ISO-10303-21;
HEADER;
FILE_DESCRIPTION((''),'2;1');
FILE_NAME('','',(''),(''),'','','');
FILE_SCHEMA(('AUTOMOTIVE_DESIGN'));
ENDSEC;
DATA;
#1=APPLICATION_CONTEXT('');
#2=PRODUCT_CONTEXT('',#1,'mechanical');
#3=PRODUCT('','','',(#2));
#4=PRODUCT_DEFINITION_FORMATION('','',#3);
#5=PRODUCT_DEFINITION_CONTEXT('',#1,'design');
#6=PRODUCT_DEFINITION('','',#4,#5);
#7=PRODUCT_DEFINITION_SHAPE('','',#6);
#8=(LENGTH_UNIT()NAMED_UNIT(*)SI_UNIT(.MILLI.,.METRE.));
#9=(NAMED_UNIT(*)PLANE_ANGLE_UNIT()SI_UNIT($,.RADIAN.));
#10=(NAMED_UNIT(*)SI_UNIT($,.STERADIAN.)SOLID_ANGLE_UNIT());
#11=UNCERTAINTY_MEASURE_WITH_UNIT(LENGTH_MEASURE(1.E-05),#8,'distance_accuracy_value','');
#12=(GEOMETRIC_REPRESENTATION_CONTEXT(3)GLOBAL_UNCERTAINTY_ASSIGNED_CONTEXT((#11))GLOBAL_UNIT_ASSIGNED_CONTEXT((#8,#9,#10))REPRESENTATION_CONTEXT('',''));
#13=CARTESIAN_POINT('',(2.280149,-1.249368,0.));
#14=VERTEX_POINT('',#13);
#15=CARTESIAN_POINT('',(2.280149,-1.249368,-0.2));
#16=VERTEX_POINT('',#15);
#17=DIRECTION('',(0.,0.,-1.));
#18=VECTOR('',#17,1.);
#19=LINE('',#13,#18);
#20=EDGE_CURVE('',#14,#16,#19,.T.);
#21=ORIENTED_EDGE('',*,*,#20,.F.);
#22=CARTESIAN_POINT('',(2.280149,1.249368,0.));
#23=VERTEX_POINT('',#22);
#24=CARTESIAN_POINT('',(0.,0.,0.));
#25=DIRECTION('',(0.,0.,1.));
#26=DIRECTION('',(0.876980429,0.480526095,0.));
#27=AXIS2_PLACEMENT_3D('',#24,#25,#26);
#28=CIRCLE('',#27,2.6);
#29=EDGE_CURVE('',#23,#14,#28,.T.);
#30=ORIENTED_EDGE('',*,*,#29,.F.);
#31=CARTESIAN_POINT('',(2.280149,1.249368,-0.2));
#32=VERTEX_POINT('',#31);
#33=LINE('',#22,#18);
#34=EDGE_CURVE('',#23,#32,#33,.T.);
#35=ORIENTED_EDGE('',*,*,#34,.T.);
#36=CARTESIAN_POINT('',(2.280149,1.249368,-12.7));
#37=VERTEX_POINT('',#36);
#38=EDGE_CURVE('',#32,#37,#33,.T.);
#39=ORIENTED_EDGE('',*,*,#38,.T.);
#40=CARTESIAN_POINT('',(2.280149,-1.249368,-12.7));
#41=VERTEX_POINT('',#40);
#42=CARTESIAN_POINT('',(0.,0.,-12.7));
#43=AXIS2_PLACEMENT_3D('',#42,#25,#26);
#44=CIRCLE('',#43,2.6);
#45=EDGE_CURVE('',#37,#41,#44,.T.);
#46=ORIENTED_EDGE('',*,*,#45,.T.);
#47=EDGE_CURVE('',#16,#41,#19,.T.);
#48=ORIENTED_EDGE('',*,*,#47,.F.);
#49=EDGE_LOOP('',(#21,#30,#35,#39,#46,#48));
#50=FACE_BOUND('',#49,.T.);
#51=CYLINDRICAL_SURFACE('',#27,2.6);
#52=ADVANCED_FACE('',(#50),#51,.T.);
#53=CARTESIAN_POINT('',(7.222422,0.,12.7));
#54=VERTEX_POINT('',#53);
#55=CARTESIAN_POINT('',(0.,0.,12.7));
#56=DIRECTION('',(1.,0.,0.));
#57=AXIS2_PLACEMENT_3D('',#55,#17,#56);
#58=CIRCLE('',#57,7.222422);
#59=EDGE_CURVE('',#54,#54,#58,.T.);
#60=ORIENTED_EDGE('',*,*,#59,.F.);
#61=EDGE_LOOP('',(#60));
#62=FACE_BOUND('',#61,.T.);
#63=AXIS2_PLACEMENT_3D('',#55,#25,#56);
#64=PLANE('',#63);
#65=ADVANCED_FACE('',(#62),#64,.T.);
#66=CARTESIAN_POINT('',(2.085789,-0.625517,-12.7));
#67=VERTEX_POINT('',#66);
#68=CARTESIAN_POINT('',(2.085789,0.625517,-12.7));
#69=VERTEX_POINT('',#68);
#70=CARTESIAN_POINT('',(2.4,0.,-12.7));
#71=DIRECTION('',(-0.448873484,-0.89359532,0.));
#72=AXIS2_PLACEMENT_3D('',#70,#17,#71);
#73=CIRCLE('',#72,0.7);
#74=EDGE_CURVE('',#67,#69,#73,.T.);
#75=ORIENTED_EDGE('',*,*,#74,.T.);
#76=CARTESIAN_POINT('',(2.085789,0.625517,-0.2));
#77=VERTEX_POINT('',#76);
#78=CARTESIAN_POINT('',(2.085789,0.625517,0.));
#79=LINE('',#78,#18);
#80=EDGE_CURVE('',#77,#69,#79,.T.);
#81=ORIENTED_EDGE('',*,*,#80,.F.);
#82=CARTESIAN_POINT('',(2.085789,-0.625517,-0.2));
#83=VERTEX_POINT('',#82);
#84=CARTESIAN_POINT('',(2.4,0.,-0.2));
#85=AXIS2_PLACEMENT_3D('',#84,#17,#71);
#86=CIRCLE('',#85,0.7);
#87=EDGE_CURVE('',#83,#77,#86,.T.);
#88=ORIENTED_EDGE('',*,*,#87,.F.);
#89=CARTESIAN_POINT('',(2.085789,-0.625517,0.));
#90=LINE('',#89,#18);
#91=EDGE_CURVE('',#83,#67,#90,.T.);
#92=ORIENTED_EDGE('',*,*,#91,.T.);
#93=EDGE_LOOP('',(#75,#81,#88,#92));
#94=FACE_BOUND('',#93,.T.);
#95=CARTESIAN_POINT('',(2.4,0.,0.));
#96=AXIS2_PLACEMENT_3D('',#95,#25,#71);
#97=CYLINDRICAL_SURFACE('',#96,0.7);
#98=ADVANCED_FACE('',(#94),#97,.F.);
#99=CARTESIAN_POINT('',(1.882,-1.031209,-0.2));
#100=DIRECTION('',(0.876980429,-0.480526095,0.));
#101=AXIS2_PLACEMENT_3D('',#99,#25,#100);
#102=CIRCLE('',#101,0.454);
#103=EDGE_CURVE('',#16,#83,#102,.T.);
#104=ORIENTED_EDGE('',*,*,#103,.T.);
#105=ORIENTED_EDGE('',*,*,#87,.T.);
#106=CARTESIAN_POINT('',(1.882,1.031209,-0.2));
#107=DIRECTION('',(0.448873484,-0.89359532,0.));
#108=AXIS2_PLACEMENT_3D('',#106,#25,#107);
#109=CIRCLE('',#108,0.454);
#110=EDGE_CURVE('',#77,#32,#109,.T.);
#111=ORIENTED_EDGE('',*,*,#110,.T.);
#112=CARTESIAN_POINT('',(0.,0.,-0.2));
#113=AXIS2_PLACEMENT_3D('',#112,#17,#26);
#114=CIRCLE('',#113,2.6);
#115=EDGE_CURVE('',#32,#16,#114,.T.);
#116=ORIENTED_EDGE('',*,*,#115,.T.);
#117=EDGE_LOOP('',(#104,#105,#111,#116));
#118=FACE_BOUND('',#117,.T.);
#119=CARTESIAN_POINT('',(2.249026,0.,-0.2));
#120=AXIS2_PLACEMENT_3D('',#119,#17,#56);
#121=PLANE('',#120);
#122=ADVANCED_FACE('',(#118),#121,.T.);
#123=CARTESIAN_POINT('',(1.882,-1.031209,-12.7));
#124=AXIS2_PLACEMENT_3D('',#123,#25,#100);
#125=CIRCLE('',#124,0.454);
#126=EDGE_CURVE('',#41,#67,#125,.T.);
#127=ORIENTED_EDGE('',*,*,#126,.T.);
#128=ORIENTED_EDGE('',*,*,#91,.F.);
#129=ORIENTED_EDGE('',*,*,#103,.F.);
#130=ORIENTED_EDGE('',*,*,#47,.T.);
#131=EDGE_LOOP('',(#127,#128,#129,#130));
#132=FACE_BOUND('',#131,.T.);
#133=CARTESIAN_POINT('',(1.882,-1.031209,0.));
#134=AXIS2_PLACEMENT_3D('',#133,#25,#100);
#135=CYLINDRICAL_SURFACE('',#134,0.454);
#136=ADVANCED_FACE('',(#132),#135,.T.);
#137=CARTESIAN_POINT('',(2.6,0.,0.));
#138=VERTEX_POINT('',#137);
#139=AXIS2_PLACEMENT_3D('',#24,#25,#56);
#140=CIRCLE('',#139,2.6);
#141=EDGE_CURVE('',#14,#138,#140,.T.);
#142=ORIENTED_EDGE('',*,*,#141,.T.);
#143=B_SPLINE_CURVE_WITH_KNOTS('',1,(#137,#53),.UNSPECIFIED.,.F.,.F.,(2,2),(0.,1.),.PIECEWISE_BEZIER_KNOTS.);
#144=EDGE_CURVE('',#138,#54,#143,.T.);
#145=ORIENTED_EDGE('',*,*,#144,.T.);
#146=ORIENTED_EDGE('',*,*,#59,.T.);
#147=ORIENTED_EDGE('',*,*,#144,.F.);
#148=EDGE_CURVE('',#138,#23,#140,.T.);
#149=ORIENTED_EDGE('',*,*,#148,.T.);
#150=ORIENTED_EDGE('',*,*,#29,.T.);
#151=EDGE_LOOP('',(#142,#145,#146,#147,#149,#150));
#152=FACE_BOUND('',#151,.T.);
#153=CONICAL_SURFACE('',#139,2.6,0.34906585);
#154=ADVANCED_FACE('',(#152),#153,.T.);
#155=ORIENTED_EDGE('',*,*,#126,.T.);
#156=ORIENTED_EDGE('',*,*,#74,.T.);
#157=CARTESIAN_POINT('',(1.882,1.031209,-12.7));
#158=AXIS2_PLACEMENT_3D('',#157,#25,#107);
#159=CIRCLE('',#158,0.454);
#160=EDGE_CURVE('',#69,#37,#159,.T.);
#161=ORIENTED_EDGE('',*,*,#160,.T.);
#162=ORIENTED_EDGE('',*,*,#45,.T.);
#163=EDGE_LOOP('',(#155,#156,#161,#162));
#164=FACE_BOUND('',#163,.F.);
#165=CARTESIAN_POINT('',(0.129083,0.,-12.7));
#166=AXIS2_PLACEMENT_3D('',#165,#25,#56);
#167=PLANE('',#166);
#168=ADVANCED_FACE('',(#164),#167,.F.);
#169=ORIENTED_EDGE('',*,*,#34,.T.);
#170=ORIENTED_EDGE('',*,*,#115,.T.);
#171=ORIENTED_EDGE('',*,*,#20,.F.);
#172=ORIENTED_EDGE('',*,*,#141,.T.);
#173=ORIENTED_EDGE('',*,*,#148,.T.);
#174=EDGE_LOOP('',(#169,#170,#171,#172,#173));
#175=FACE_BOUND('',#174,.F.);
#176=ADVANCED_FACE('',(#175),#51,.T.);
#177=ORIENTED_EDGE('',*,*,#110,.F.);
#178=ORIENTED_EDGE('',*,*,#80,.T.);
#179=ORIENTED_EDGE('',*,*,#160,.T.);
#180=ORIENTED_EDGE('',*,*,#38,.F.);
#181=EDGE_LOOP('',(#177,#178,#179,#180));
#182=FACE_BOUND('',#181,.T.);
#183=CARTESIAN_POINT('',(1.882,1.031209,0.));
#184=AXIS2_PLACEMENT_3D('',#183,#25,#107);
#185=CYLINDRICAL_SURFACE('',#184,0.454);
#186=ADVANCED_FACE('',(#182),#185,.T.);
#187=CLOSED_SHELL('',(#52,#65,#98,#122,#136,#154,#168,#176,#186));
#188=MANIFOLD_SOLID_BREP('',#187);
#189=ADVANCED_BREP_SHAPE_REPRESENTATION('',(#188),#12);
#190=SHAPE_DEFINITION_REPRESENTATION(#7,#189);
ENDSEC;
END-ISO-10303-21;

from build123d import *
from build123d import SkipClean  # not in build123d's __all__

# Parameters (mm, degrees)
F1_DEPTH = 12.7
F2_R     = 2.6
F3_DEPTH = 12.7
F3_TAPER = -20
F6_DEPTH = 0.2


with BuildPart() as f1:
    # F0 (on Top) → F1 (new body)
    with BuildSketch(Plane.XY):
        with BuildLine():
            ThreePointArc((2.0857885615, 0.6255167239), (2.315451032, 0.8961675136), (2.2801491146, 1.2493678462))
            ThreePointArc((2.2801491146, 1.2493678462), (-2.6, 0), (2.2801491146, -1.2493678462))
            ThreePointArc((2.2801491146, -1.2493678462), (2.315451032, -0.8961675136), (2.0857885615, -0.6255167239))
            ThreePointArc((2.0857885615, -0.6255167239), (1.7, 0), (2.0857885615, 0.6255167239))
        make_face()
    extrude(amount=-F1_DEPTH)

    # F2 (on Top) → F3 (join)
    with BuildSketch(Plane.XY):
        Circle(F2_R)
    extrude(amount=F3_DEPTH, taper=F3_TAPER)

    # F5 (on face) → F6 (join)
    with BuildSketch(Plane(origin=(0, 0, 0), x_dir=(1, 0, 0), z_dir=(0, 0, -1))):
        with BuildLine():
            ThreePointArc((2.2801491146, 1.2493678462), (2.315451032, 0.8961675136), (2.0857885615, 0.6255167239))
            ThreePointArc((2.0857885615, 0.6255167239), (1.7, 0), (2.0857885615, -0.6255167239))
            ThreePointArc((2.0857885615, -0.6255167239), (2.315451032, -0.8961675136), (2.2801491146, -1.2493678462))
            ThreePointArc((2.2801491146, -1.2493678462), (2.6, 0), (2.2801491146, 1.2493678462))
        make_face()
    with SkipClean():  # cleaning this boolean's faces spoils the solid; the shape is the same uncleaned
        extrude(amount=F6_DEPTH)


solid = f1.part
